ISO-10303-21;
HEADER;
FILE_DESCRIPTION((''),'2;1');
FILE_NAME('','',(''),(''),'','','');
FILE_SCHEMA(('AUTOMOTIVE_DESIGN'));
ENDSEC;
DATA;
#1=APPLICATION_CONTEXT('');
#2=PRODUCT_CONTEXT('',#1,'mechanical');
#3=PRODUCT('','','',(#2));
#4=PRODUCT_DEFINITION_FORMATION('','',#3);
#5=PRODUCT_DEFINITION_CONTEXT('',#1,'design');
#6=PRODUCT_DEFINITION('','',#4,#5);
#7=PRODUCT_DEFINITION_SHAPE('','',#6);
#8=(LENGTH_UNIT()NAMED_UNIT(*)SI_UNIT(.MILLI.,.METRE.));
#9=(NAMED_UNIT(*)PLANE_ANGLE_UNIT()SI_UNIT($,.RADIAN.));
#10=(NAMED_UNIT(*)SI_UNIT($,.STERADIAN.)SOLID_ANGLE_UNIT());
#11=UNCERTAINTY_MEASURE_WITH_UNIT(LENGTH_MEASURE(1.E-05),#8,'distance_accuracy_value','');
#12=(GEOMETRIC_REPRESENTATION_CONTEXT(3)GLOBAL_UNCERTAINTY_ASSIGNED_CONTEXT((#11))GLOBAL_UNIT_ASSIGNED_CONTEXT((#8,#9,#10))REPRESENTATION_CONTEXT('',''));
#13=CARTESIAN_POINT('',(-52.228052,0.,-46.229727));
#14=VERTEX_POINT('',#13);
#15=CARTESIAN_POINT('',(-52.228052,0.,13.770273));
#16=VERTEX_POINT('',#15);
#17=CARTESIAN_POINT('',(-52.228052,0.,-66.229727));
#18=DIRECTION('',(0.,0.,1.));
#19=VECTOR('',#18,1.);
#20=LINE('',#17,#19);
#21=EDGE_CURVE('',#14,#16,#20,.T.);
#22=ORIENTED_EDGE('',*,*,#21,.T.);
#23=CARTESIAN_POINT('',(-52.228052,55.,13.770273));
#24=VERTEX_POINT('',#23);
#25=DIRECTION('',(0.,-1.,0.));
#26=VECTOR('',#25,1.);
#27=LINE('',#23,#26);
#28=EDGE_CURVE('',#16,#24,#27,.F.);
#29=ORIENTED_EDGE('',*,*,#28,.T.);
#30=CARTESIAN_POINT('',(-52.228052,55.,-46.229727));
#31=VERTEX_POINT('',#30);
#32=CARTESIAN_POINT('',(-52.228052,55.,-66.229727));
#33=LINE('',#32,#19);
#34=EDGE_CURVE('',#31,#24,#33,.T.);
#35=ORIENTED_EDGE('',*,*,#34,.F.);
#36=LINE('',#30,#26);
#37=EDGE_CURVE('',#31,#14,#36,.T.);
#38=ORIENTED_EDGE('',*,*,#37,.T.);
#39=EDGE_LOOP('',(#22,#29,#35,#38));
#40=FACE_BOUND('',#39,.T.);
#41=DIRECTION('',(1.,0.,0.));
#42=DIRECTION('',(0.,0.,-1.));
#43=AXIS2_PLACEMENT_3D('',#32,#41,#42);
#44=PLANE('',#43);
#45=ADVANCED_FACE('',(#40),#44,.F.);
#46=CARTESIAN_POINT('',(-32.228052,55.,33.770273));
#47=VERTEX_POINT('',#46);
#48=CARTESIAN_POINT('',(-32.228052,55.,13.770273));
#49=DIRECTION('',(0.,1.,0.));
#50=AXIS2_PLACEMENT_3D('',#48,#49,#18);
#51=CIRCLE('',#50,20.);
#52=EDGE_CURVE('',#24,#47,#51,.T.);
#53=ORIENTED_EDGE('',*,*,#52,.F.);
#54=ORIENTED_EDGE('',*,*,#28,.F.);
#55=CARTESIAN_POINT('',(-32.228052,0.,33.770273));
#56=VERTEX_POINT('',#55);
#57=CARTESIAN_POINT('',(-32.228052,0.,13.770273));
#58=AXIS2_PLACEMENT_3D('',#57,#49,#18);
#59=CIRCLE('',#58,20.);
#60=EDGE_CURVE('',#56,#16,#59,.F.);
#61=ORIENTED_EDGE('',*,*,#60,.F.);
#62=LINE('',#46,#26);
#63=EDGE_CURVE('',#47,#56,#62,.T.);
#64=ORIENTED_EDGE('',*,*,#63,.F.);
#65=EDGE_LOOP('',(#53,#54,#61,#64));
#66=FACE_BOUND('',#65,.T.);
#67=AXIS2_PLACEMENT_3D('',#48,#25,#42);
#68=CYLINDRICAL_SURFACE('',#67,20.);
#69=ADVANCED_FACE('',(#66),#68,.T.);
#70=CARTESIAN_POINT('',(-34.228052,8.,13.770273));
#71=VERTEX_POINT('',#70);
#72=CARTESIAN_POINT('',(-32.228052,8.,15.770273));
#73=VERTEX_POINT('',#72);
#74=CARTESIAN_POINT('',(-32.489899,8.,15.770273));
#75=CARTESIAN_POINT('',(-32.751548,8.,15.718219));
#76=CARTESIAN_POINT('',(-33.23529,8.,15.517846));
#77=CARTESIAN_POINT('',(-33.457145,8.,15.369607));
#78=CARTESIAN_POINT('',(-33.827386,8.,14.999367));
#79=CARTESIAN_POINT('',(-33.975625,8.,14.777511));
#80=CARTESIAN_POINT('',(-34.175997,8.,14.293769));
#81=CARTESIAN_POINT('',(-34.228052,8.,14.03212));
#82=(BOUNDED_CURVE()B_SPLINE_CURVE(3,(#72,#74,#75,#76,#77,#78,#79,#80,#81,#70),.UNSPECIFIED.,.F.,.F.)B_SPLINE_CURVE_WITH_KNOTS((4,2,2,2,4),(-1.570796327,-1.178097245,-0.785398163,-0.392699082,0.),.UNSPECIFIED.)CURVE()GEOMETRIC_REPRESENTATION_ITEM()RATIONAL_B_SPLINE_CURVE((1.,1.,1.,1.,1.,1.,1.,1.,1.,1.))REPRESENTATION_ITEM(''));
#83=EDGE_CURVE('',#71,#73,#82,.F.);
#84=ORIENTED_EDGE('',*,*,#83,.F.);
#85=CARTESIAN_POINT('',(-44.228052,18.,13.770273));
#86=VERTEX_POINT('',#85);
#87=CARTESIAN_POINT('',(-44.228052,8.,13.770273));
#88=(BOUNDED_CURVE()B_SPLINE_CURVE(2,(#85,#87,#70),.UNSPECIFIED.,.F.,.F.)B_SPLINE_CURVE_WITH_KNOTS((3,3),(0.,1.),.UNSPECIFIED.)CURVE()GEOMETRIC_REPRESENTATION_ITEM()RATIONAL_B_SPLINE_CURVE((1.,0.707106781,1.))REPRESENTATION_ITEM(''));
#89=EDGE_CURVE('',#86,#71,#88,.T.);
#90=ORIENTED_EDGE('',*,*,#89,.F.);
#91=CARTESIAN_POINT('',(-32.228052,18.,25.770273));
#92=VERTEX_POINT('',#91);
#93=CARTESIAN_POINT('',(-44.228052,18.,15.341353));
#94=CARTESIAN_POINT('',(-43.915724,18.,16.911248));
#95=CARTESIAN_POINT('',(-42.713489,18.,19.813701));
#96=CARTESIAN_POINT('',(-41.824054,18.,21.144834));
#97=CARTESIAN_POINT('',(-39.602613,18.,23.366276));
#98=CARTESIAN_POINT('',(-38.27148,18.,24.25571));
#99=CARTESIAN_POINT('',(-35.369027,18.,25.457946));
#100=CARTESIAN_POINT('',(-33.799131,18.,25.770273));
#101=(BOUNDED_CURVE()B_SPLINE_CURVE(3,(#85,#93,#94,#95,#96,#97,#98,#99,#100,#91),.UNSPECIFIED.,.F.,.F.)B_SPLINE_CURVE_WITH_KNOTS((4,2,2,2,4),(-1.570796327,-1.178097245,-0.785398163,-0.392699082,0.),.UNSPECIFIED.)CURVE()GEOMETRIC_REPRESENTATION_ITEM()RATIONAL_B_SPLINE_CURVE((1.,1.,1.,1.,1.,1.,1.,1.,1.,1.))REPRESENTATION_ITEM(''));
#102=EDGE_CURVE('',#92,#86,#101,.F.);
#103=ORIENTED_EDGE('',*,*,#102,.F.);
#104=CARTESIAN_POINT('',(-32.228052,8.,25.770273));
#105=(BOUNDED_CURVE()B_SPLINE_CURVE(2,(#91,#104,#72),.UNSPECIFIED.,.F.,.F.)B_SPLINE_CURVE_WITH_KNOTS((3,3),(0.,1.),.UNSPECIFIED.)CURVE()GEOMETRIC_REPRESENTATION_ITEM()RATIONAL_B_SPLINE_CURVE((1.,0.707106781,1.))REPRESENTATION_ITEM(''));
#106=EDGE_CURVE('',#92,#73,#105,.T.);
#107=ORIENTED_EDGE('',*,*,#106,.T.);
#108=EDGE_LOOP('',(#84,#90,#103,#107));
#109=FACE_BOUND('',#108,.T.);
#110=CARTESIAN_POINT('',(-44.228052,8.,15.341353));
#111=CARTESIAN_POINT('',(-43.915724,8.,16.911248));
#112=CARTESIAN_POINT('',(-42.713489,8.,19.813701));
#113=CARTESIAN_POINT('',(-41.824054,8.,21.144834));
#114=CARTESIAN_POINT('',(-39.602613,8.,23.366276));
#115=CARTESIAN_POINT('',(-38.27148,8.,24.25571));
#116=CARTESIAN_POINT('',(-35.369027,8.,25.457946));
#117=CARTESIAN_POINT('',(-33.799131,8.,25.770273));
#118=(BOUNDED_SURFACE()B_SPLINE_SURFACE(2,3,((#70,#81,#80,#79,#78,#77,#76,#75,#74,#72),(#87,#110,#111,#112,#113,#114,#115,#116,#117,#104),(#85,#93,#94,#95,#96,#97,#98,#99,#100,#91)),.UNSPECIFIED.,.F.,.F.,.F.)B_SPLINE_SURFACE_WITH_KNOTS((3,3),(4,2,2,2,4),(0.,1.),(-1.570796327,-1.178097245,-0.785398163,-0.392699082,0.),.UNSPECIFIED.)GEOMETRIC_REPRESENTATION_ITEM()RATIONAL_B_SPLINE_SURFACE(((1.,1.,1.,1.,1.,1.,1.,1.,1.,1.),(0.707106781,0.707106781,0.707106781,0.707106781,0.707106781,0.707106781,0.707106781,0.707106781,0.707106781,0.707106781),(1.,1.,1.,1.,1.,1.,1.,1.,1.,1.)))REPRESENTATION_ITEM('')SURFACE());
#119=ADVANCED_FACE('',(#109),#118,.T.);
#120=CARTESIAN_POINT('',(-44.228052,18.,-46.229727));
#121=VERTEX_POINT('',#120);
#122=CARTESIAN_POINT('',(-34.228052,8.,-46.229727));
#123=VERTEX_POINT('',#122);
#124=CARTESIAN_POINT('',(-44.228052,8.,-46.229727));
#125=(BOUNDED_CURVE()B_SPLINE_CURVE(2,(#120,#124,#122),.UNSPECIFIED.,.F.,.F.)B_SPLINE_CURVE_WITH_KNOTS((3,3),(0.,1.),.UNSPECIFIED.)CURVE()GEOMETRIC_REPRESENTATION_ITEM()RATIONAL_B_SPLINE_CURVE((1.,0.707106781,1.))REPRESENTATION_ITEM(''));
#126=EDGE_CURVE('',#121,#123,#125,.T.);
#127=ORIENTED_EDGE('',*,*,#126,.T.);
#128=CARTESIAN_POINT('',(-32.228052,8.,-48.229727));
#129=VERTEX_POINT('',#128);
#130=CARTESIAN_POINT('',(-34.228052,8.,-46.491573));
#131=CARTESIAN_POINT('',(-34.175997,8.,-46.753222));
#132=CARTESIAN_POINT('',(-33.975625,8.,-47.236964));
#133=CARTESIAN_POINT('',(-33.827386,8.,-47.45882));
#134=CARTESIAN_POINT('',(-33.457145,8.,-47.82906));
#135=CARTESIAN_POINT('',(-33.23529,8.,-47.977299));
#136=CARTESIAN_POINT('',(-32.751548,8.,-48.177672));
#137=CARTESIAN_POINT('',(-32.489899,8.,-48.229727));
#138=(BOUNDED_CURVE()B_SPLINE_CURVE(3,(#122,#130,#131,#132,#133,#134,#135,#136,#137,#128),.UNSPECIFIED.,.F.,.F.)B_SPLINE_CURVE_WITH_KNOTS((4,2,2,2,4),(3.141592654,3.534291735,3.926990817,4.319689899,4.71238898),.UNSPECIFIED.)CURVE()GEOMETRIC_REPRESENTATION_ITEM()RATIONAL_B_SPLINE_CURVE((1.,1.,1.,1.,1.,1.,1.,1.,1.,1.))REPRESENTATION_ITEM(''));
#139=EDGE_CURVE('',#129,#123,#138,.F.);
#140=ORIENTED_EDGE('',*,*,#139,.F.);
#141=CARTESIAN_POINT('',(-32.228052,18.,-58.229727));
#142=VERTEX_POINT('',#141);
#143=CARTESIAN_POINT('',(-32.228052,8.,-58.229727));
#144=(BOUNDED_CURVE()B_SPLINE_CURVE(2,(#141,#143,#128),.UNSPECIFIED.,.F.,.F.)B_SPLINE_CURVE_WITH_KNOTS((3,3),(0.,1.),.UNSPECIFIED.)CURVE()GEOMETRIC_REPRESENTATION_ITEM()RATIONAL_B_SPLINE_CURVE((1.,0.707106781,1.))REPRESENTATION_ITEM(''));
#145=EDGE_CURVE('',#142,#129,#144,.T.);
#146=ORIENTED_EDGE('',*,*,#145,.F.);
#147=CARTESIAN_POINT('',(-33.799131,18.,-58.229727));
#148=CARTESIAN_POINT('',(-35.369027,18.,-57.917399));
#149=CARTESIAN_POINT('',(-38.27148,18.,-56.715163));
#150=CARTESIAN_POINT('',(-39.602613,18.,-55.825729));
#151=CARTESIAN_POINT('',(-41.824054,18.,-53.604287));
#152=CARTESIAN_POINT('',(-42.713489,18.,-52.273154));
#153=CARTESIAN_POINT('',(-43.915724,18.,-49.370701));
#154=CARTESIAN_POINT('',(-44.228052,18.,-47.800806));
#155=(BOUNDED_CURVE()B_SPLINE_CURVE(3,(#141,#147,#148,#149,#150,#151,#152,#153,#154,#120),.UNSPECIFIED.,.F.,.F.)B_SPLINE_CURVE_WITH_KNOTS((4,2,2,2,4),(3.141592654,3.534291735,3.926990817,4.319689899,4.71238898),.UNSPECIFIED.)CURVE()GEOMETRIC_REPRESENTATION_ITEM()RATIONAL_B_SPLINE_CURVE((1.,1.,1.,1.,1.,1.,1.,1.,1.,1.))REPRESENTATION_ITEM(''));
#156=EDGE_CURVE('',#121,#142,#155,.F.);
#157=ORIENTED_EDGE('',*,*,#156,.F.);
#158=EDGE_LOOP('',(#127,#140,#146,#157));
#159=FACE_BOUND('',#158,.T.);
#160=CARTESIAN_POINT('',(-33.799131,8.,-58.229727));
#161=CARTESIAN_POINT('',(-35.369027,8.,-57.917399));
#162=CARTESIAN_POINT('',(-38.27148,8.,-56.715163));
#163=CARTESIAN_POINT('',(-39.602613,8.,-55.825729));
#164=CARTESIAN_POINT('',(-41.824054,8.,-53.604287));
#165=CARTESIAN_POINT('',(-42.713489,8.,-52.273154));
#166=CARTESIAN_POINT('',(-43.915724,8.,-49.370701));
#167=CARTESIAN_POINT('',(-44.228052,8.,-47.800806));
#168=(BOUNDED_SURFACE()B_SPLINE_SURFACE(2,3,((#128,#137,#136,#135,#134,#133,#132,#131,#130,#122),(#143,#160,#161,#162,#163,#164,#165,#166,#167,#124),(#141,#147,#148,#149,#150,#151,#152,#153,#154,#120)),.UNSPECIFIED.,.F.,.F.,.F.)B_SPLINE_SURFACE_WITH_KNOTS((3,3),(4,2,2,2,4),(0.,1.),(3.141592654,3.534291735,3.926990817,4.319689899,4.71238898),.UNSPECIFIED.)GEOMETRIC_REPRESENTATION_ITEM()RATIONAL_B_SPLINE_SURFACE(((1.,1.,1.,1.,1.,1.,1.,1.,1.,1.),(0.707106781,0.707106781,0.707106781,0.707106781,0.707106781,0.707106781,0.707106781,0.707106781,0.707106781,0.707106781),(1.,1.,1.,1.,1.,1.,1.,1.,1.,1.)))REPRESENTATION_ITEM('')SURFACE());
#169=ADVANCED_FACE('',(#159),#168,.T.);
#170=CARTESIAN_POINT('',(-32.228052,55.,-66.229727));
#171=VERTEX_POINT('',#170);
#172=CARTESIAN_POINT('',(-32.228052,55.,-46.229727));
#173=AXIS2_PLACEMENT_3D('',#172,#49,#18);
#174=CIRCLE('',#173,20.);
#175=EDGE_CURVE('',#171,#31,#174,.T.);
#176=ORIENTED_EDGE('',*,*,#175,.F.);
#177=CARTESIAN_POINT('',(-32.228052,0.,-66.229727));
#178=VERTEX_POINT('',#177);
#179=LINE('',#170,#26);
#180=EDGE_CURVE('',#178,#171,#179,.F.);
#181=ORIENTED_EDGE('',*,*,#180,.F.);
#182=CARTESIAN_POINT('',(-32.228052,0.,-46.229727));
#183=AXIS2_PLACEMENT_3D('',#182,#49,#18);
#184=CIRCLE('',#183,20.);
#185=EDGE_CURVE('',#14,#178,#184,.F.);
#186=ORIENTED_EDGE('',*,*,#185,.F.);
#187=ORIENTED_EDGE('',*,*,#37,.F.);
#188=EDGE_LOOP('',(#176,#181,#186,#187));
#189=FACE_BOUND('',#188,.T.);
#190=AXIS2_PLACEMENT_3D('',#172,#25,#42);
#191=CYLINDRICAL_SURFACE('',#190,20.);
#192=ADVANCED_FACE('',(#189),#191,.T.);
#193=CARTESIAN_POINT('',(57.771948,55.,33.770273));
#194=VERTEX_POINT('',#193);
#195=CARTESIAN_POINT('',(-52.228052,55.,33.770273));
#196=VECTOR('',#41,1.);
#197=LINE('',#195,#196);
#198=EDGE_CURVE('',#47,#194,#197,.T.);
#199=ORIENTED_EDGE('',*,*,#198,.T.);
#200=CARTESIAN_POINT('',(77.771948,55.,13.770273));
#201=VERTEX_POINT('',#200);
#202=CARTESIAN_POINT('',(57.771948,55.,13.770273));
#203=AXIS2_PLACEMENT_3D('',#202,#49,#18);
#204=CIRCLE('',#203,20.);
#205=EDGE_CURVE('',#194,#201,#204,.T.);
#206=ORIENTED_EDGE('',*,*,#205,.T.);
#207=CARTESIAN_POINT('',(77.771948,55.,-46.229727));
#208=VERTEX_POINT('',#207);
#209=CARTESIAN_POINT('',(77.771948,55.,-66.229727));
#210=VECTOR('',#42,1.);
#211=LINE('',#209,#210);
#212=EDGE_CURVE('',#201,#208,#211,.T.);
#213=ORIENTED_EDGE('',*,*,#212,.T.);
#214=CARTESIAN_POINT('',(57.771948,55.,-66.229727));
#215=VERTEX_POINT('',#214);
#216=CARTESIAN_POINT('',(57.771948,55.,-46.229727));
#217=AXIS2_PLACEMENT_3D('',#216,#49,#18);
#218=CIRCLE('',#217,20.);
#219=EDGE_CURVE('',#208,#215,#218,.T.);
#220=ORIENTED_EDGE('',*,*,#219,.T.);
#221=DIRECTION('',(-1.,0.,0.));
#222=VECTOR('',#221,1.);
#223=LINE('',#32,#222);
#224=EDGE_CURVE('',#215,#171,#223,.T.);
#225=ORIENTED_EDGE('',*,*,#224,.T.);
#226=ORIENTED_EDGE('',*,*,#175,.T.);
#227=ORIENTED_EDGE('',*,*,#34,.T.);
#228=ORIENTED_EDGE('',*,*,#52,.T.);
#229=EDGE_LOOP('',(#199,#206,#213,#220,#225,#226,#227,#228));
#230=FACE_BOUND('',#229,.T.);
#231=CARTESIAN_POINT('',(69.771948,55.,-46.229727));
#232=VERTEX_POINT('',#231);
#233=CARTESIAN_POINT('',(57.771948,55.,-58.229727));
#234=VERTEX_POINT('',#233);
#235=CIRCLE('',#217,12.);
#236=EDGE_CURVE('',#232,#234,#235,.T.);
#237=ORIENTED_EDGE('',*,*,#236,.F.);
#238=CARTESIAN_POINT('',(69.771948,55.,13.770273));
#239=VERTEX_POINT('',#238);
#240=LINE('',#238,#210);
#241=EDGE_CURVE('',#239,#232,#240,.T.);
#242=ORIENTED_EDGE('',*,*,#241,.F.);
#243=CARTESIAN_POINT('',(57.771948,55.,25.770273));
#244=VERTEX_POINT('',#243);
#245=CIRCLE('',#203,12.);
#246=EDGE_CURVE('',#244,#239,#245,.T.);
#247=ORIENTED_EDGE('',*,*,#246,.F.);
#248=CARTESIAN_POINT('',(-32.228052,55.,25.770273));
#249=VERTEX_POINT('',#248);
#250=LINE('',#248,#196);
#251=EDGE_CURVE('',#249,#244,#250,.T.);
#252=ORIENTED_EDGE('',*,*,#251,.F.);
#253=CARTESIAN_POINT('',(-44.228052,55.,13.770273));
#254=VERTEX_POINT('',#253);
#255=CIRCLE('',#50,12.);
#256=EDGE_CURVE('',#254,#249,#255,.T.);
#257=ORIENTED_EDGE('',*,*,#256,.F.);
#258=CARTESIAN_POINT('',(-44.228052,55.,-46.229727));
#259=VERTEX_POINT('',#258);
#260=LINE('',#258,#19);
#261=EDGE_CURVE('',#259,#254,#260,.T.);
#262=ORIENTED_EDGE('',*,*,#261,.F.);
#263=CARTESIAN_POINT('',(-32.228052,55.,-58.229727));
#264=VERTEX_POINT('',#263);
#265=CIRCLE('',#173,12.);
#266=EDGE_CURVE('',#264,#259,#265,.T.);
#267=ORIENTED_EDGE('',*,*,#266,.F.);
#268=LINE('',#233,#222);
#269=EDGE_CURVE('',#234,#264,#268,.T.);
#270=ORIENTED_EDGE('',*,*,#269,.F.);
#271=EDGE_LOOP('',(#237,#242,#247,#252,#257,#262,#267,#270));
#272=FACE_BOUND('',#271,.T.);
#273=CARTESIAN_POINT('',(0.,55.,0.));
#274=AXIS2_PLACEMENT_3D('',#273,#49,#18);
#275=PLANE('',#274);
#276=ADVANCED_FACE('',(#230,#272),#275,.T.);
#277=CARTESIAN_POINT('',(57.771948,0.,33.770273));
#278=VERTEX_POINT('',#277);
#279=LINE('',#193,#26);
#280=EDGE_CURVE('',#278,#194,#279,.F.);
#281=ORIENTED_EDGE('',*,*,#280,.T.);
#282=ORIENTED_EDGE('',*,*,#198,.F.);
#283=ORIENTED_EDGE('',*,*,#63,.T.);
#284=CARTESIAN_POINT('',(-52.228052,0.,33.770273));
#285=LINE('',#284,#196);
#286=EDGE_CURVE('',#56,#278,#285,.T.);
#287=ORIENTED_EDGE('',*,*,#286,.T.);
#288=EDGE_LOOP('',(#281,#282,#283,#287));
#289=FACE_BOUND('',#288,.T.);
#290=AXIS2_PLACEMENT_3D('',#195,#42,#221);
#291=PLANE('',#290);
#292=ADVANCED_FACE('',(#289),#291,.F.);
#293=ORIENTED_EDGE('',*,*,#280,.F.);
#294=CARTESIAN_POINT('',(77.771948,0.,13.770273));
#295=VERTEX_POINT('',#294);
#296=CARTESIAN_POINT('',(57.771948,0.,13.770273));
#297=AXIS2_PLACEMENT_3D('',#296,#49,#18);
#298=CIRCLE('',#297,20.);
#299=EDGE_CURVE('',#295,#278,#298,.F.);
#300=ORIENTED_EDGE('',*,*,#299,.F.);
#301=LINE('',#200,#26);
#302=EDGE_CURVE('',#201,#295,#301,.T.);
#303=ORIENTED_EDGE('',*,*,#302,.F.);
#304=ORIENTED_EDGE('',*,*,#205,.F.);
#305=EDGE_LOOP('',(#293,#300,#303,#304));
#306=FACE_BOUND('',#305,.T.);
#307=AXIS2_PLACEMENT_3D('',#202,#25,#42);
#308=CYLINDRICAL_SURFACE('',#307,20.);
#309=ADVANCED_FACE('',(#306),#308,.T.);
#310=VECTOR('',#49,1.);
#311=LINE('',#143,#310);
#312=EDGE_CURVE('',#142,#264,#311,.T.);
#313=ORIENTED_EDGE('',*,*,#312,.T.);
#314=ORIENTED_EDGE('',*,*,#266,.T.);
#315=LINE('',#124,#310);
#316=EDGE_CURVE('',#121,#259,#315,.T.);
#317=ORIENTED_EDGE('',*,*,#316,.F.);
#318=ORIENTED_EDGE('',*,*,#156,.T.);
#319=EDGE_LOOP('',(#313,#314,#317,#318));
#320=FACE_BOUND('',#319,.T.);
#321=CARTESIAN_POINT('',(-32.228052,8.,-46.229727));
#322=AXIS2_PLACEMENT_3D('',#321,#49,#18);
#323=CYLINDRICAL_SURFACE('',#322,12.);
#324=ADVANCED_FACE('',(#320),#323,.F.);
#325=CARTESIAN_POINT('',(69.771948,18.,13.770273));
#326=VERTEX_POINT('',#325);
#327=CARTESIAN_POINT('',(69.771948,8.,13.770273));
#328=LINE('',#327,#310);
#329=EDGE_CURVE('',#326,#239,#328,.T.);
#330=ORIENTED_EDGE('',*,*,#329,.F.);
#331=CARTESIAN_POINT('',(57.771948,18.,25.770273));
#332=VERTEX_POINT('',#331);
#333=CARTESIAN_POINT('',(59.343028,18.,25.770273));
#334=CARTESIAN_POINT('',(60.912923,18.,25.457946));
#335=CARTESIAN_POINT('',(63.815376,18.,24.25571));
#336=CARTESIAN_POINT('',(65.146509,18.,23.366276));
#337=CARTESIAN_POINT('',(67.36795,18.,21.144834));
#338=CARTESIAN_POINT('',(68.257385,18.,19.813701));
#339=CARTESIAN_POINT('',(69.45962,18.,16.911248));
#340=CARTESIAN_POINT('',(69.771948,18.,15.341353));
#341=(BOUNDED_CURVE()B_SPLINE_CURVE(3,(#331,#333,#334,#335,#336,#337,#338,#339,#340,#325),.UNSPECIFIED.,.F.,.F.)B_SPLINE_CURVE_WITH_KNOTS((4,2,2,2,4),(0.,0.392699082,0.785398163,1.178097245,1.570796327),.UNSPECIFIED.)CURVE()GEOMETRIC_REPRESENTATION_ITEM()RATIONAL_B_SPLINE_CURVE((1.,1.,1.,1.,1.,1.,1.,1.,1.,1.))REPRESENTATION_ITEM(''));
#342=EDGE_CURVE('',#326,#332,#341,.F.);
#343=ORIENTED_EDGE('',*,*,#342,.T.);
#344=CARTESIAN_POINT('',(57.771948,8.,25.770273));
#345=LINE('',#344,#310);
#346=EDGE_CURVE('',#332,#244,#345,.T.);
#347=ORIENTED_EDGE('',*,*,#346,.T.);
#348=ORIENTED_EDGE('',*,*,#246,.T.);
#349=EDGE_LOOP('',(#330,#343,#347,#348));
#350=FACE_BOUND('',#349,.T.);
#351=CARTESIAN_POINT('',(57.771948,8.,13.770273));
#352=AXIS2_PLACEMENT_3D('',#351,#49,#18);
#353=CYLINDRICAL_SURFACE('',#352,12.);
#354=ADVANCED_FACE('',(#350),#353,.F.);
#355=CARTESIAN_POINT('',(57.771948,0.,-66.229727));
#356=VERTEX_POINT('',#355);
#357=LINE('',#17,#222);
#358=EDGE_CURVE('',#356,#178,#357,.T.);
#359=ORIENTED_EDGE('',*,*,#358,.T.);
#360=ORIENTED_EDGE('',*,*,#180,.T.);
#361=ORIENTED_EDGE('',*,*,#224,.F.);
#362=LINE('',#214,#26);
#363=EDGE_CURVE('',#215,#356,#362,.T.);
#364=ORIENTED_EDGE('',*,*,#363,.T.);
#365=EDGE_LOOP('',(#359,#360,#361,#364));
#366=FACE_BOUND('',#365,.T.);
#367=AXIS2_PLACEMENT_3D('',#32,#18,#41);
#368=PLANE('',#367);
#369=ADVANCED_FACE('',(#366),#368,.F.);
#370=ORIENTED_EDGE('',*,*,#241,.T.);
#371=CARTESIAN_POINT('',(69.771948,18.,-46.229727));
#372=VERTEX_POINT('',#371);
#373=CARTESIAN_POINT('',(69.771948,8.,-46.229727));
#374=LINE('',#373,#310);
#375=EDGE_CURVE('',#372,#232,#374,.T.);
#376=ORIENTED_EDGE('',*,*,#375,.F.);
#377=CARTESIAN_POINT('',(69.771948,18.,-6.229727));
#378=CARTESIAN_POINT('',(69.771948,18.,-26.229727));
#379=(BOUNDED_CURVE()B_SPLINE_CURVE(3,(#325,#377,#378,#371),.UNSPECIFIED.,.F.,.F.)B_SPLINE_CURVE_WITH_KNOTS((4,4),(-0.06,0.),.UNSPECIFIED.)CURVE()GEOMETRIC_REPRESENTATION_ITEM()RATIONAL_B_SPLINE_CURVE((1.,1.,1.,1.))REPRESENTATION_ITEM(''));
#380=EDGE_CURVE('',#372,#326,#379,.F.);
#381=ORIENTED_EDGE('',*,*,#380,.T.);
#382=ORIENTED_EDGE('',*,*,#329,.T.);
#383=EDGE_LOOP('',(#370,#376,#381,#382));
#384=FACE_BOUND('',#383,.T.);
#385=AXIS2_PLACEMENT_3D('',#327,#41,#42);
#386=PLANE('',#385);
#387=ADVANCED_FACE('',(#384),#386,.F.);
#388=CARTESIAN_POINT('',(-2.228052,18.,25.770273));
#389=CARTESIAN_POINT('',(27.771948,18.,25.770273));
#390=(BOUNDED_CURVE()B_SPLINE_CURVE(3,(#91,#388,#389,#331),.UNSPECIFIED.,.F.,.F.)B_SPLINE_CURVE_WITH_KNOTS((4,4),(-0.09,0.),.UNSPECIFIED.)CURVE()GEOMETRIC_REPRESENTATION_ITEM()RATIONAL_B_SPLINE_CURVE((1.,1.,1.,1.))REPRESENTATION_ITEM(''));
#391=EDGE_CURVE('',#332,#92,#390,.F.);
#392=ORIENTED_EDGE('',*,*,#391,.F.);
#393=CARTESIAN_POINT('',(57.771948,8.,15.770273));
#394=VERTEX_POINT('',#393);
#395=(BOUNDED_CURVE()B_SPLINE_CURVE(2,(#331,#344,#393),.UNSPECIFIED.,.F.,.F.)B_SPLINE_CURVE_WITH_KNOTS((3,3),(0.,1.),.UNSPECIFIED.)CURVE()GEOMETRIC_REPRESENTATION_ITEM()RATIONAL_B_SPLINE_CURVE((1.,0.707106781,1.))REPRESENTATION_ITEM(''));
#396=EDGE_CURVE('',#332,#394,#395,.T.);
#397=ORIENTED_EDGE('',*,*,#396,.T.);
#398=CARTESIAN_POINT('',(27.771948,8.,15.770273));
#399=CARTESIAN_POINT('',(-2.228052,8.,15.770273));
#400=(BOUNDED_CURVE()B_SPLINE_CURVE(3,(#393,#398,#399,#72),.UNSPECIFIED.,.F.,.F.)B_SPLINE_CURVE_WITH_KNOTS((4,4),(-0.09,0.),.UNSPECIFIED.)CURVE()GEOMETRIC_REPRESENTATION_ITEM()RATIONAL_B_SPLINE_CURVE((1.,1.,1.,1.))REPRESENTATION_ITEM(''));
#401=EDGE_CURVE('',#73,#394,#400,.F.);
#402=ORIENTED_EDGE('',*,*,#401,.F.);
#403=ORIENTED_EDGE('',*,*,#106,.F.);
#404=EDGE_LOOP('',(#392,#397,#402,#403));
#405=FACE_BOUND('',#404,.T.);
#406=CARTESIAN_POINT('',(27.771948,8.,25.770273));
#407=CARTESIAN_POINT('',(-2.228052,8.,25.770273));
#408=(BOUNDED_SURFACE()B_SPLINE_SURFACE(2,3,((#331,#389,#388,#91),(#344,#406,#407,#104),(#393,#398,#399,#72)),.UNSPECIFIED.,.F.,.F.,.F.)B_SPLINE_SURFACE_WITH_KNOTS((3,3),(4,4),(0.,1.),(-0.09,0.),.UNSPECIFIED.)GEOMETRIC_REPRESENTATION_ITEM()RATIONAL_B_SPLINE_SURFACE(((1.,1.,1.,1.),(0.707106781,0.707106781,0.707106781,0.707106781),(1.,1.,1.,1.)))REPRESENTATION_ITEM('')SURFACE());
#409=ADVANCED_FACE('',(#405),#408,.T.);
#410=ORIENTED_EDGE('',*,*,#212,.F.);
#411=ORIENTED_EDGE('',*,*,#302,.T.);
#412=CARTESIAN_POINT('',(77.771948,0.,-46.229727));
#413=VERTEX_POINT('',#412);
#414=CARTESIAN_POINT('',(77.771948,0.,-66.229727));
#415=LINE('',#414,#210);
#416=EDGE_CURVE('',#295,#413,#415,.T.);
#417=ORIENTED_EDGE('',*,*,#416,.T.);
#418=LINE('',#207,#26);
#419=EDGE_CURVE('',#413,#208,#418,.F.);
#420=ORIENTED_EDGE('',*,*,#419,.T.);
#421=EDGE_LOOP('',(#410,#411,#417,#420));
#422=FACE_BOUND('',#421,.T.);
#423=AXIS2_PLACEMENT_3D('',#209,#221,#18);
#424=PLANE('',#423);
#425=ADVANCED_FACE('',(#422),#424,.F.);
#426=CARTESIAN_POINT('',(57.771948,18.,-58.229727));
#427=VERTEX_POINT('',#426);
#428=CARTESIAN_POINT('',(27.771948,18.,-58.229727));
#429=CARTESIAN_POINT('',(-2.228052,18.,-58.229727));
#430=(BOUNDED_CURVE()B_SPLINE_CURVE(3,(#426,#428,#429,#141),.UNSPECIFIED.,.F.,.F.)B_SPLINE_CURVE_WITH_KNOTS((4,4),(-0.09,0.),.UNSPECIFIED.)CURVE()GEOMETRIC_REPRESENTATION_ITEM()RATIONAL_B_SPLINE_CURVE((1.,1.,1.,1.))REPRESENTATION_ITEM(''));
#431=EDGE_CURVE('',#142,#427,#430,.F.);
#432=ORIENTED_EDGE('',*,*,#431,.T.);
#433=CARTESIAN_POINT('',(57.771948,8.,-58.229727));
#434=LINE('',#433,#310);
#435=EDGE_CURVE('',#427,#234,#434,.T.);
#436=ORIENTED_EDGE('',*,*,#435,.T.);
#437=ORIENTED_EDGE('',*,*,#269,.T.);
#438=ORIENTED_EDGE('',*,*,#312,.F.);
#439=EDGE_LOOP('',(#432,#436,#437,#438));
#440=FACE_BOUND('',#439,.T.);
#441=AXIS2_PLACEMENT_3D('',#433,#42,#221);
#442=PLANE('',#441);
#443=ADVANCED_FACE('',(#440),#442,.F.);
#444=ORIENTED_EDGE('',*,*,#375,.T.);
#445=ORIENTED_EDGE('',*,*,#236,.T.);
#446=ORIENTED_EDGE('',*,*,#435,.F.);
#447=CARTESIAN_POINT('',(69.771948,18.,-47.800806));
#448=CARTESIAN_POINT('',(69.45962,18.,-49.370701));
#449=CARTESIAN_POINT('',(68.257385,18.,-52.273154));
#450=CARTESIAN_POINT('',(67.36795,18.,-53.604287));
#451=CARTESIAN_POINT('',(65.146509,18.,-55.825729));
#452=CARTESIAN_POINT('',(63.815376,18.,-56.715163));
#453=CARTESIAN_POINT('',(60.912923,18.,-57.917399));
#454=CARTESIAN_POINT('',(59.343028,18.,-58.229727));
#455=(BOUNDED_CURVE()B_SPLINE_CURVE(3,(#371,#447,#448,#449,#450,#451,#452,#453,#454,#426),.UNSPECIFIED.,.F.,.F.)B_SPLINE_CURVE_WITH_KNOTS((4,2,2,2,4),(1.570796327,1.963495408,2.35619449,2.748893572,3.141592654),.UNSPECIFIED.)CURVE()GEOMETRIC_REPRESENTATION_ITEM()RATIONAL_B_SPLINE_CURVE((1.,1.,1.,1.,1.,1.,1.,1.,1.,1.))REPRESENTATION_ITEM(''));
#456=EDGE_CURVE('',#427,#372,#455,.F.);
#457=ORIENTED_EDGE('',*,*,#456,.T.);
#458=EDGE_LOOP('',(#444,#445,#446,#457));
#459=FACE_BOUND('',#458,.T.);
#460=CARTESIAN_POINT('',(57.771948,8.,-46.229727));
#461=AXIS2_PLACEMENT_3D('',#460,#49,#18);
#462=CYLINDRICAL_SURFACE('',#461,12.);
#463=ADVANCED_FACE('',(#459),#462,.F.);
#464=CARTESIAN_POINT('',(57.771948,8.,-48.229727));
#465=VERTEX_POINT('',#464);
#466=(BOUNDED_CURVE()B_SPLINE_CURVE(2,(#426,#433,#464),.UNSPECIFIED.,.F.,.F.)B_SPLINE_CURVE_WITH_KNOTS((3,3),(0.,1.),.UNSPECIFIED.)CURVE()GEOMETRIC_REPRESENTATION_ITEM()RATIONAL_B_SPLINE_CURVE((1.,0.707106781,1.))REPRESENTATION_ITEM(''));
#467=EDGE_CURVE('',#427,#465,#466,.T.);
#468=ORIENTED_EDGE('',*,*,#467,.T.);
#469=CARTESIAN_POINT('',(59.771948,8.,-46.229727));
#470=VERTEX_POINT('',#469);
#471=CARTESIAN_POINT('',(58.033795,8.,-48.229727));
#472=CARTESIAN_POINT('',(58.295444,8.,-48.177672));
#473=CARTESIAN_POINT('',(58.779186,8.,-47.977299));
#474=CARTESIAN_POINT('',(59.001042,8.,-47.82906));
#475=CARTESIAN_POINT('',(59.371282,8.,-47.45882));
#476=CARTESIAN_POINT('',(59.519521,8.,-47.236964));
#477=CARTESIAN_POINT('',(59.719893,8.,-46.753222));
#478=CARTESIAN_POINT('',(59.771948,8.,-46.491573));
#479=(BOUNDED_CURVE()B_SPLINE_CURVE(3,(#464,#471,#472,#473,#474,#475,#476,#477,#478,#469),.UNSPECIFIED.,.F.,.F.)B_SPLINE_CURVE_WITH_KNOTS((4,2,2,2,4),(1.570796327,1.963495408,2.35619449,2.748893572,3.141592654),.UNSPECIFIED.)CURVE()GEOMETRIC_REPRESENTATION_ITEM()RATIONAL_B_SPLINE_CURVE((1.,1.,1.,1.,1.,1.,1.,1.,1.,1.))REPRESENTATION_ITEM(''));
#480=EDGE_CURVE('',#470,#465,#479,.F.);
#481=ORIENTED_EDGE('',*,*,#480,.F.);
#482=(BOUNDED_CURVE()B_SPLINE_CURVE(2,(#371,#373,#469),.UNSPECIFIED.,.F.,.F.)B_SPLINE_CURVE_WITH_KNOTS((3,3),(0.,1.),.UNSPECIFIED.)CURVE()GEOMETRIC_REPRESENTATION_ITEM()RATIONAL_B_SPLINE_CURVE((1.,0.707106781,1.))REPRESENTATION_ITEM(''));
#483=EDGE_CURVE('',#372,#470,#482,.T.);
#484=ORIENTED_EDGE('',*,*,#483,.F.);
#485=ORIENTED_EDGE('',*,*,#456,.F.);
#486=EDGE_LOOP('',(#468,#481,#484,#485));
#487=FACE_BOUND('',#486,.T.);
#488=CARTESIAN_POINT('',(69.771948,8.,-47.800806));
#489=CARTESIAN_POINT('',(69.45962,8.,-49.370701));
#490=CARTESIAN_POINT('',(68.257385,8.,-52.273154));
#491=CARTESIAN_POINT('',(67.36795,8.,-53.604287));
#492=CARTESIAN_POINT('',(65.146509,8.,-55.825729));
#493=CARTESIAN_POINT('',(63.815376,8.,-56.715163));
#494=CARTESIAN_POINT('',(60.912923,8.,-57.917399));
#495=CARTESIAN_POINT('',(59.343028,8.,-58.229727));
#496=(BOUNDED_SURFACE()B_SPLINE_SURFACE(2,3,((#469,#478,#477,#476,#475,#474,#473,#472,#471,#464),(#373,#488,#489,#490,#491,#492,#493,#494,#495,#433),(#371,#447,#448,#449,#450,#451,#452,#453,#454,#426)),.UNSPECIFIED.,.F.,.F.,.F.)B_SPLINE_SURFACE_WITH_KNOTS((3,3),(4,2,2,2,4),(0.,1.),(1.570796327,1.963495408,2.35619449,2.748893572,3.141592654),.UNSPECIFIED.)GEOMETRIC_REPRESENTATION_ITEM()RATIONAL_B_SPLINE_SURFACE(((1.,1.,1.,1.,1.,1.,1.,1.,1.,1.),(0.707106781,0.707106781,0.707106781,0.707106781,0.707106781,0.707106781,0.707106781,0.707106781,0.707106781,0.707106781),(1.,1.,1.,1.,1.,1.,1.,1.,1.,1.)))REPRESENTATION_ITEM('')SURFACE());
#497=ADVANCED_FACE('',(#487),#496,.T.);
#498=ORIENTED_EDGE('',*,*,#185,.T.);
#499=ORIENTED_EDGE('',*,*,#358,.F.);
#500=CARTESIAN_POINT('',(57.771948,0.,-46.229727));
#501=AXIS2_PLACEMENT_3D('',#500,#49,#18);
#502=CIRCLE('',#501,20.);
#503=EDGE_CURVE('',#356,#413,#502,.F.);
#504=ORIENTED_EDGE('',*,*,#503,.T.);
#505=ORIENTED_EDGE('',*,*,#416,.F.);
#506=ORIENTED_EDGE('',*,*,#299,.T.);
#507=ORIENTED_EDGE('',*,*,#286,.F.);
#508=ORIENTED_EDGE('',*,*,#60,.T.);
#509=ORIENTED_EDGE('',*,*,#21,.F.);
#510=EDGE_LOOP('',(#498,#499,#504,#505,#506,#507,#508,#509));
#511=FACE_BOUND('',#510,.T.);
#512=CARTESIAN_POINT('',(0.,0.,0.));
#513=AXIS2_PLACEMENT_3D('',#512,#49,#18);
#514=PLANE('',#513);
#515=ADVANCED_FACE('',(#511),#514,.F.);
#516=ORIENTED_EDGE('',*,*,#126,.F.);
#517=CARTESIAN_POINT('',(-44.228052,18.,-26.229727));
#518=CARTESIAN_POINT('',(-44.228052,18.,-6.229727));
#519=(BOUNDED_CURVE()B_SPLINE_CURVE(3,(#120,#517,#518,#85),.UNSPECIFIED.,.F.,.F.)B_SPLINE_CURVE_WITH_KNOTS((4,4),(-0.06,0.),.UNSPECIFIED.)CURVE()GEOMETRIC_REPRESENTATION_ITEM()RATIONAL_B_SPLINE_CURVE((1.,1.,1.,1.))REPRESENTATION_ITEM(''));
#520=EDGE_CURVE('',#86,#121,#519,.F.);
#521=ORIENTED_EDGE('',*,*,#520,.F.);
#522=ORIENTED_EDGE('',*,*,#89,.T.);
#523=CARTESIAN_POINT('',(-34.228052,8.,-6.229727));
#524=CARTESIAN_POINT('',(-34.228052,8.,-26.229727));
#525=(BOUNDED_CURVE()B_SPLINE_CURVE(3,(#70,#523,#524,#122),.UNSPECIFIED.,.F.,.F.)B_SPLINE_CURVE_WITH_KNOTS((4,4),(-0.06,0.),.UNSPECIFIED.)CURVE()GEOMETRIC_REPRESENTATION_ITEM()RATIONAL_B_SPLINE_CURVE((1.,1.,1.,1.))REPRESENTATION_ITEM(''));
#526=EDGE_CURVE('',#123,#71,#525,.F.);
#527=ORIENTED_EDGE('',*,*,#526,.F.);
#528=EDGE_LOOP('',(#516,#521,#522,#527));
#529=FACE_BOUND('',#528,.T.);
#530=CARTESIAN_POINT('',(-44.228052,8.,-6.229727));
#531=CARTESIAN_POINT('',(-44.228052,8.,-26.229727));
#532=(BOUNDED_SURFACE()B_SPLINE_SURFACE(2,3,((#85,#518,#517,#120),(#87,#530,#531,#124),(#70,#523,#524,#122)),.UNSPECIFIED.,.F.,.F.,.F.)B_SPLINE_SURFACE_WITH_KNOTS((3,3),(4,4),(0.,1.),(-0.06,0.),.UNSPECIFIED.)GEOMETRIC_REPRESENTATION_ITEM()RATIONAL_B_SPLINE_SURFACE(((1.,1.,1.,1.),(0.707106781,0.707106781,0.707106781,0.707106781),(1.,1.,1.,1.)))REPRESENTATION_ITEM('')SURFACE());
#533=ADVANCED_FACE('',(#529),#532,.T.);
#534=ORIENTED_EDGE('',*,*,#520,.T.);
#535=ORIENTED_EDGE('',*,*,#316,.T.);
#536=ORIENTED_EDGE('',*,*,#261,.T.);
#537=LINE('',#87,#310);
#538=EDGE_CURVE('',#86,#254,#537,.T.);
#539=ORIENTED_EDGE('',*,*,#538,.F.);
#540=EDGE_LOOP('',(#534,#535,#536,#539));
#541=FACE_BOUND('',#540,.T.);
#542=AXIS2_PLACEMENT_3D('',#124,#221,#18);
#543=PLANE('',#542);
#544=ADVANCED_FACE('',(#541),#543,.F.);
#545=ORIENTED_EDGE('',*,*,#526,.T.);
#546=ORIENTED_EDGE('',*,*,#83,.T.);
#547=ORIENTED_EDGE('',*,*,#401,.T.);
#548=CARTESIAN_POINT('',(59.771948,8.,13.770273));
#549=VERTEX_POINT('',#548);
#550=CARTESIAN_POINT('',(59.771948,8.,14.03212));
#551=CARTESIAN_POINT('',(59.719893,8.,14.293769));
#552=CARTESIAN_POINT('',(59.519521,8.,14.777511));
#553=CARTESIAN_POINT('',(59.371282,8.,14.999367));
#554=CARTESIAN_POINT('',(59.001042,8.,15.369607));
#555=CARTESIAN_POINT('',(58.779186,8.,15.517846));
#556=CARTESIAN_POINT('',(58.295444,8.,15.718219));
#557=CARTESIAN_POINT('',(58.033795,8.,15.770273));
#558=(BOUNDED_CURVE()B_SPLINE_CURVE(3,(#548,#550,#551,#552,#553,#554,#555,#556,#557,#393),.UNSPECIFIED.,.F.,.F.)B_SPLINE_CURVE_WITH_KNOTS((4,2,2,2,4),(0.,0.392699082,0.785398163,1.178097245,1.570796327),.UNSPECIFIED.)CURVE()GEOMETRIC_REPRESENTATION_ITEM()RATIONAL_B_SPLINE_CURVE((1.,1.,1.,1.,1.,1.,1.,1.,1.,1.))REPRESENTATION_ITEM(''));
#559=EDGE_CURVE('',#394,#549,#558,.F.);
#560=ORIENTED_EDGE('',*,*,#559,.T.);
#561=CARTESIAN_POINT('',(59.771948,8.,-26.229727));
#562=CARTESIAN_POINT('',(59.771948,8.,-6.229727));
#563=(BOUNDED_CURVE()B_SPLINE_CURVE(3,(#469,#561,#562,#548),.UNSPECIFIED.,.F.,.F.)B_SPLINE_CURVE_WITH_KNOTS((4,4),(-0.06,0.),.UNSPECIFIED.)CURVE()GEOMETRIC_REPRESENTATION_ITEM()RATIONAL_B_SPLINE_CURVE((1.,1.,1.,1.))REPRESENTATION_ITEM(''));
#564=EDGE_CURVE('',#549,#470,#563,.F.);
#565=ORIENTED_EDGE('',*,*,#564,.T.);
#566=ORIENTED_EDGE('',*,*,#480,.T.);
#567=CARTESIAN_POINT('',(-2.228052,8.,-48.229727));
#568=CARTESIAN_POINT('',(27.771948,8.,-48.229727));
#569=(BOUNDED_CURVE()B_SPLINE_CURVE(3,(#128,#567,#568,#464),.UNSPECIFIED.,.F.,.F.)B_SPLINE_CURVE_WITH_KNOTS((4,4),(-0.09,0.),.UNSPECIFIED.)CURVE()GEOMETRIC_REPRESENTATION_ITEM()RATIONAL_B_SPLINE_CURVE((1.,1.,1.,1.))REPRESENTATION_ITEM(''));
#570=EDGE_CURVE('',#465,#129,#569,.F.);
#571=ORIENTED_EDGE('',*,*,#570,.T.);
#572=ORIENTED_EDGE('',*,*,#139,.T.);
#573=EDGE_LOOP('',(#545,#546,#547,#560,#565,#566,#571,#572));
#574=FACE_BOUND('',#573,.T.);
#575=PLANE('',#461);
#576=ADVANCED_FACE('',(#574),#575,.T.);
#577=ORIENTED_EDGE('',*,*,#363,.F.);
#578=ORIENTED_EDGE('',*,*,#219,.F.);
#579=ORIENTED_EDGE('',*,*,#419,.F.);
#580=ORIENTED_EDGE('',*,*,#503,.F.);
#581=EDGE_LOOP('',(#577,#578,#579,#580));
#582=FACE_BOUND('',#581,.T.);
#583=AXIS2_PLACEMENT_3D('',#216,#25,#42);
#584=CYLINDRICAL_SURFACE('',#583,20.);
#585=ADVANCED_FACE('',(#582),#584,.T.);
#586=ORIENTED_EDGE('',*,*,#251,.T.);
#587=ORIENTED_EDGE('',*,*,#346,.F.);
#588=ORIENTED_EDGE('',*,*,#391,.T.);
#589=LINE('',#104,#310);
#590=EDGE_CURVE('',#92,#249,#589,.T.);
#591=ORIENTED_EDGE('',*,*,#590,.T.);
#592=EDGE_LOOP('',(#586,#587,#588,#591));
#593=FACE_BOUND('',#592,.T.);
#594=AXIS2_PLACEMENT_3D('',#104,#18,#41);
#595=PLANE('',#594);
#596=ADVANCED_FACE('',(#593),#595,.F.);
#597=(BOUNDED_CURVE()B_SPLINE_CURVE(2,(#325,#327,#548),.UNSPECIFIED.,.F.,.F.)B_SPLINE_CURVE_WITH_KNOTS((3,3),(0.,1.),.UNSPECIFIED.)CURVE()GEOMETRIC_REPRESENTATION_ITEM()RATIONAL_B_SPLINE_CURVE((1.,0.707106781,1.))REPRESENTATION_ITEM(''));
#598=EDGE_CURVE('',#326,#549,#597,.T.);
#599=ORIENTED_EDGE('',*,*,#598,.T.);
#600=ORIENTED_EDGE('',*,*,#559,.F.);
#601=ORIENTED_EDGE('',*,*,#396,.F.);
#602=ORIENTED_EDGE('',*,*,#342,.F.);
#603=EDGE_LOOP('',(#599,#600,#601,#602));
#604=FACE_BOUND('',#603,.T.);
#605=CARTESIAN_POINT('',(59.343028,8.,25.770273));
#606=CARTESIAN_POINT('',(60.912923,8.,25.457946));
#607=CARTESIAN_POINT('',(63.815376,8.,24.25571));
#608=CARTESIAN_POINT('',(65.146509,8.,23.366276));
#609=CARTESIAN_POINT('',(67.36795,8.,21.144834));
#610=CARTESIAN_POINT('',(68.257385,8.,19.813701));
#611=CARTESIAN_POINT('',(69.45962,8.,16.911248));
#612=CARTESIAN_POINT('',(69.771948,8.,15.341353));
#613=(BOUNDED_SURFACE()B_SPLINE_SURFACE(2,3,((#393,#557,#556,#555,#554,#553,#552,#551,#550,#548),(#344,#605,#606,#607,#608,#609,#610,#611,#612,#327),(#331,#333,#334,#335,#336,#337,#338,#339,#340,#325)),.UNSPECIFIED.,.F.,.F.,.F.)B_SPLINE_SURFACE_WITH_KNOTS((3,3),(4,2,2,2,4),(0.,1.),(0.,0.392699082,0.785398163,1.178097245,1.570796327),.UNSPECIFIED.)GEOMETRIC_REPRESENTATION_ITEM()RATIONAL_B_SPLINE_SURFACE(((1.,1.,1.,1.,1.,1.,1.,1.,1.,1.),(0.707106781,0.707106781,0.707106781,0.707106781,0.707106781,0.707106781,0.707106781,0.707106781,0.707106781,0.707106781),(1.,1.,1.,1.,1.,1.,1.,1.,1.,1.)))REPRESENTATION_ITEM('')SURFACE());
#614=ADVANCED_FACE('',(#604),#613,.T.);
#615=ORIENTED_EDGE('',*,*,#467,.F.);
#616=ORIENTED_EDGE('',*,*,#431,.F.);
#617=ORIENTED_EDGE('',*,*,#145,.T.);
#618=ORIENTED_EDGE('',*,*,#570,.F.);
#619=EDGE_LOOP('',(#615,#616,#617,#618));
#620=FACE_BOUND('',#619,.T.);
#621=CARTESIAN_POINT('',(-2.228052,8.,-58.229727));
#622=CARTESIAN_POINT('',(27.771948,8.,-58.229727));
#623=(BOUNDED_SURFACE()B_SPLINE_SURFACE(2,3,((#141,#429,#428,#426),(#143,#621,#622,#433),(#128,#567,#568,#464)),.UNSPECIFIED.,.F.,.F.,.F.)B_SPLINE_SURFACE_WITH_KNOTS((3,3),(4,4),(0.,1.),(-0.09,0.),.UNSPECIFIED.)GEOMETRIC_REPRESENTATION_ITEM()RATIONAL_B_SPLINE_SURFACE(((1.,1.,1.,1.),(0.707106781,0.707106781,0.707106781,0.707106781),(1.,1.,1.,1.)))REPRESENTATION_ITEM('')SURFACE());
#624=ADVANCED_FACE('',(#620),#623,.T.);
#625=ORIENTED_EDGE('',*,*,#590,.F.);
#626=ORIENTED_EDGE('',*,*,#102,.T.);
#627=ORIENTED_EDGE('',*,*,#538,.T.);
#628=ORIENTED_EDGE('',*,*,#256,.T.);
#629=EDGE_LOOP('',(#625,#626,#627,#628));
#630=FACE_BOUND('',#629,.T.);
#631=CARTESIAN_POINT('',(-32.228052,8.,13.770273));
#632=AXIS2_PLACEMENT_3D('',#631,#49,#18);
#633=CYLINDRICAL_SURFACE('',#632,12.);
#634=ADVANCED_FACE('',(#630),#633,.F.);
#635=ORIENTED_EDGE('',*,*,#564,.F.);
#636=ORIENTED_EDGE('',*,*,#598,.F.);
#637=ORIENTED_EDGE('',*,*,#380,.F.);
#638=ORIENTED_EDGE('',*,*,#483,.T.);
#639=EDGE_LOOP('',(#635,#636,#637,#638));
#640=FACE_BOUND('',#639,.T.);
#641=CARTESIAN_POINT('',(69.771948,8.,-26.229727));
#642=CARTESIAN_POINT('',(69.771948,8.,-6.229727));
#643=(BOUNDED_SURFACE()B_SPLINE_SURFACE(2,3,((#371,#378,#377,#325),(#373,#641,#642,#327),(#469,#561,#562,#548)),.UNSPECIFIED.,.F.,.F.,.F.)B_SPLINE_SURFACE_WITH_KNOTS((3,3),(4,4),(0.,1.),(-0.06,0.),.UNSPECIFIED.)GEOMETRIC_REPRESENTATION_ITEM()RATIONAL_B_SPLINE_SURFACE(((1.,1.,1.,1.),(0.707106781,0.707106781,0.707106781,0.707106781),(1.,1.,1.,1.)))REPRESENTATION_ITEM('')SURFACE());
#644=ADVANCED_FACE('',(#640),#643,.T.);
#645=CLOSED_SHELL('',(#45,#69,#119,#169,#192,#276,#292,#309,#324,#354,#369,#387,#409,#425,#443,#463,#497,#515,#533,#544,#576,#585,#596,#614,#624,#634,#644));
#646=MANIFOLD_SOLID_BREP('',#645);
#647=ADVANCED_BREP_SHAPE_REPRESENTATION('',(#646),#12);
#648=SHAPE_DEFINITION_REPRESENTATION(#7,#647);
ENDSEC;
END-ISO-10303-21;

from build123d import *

# Parameters (mm, degrees)
ESQUISSE4_W             = 130
ESQUISSE4_H             = 100
BOSS_EXTRU_4_DEPTH      = 55
CONG_5_R                = 20
ENL_V_MAT_EXTRU_1_DEPTH = 47
CONG_6_SIZE             = 10


with BuildPart() as part:
    # Esquisse4 → Boss.-Extru.4 (new body)
    with BuildSketch(Plane(origin=(0, 0, 0), x_dir=(1, 0, 0), z_dir=(0, 1, 0))):
        with Locations((12.771948074, 16.229726537)):
            Rectangle(ESQUISSE4_W, ESQUISSE4_H)
    extrude(amount=BOSS_EXTRU_4_DEPTH)

    # Congé5
    cong_5_edges = [part.edges().sort_by_distance(p)[0] for p in [
        (-52.228051926, 27.5, -66.229726537),
        (77.771948074, 27.5, -66.229726537),
        (77.771948074, 27.5, 33.770273463),
        (-52.228051926, 27.5, 33.770273463),
    ]]
    fillet(cong_5_edges, radius=CONG_5_R)

    # Esquisse5 → Enlèv. mat.-Extru.1 (cut)
    with BuildSketch(Plane(origin=(0, 55, 0), x_dir=(1, 0, 0), z_dir=(0, 1, 0))):
        with BuildLine():
            Line((57.771948074, 58.229726537), (-32.228051926, 58.229726537))
            ThreePointArc((-32.228051926, 58.229726537), (-40.713333301, 54.715007912), (-44.228051926, 46.229726537))
            Line((-44.228051926, 46.229726537), (-44.228051926, -13.770273463))
            ThreePointArc((-44.228051926, -13.770273463), (-40.713333301, -22.255554837), (-32.228051926, -25.770273463))
            Line((-32.228051926, -25.770273463), (57.771948074, -25.770273463))
            ThreePointArc((57.771948074, -25.770273463), (66.257229448, -22.255554837), (69.771948074, -13.770273463))
            Line((69.771948074, -13.770273463), (69.771948074, 46.229726537))
            ThreePointArc((69.771948074, 46.229726537), (66.257229448, 54.715007912), (57.771948074, 58.229726537))
        make_face()
    extrude(amount=-ENL_V_MAT_EXTRU_1_DEPTH, mode=Mode.SUBTRACT)

    # Congé6
    # a fillet whose section is not a circle: 10 mm, written as the material it adds along each edge
    with BuildSketch(Plane(origin=(57.771948074, 8, -46.229726537), x_dir=(1, 0, 0), z_dir=(0, 0, 1))) as cong_6_piece_1:
        with BuildLine():
            Bezier((12, CONG_6_SIZE), (12, 0), (12 - CONG_6_SIZE, 0), weights=[1, 0.707106781, 1])
            Line((12 - CONG_6_SIZE, 0), (12, 0))
            Line((12, 0), (12, CONG_6_SIZE))
        make_face()
    revolve(axis=Axis((57.771948074, 8, -46.229726537), (0, 1, 0)), revolution_arc=90)
    with BuildSketch(Plane(origin=(69.771948074, 8, 13.770273463), x_dir=(0, 1, 0), z_dir=(0, 0, -1)), Plane(origin=(-44.228051926, 8, -46.229726537), x_dir=(0, 1, 0), z_dir=(0, 0, 1))) as cong_6_piece_2:
        with BuildLine():
            Bezier((CONG_6_SIZE, 0), (0, 0), (0, -CONG_6_SIZE), weights=[1, 0.707106781, 1])
            Line((0, -CONG_6_SIZE), (0, 0))
            Line((0, 0), (CONG_6_SIZE, 0))
        make_face()
    extrude(amount=60)
    with BuildSketch(Plane(origin=(57.771948074, 8, 13.770273463), x_dir=(0, 0, 1), z_dir=(-1, 0, 0))) as cong_6_piece_3:
        with BuildLine():
            Bezier((12, CONG_6_SIZE), (12, 0), (12 - CONG_6_SIZE, 0), weights=[1, 0.707106781, 1])
            Line((12 - CONG_6_SIZE, 0), (12, 0))
            Line((12, 0), (12, CONG_6_SIZE))
        make_face()
    revolve(axis=Axis((57.771948074, 8, 13.770273463), (0, 1, 0)), revolution_arc=90)
    with BuildSketch(Plane(origin=(-32.228051926, 8, 25.770273463), x_dir=(0, 1, 0), z_dir=(1, 0, 0)), Plane(origin=(57.771948074, 8, -58.229726537), x_dir=(0, 1, 0), z_dir=(-1, 0, 0))) as cong_6_piece_4:
        with BuildLine():
            Bezier((CONG_6_SIZE, 0), (0, 0), (0, -CONG_6_SIZE), weights=[1, 0.707106781, 1])
            Line((0, -CONG_6_SIZE), (0, 0))
            Line((0, 0), (CONG_6_SIZE, 0))
        make_face()
    extrude(amount=90)
    with BuildSketch(Plane(origin=(-32.228051926, 8, 13.770273463), x_dir=(-1, 0, 0), z_dir=(0, 0, -1))) as cong_6_piece_5:
        with BuildLine():
            Bezier((12, CONG_6_SIZE), (12, 0), (12 - CONG_6_SIZE, 0), weights=[1, 0.707106781, 1])
            Line((12 - CONG_6_SIZE, 0), (12, 0))
            Line((12, 0), (12, CONG_6_SIZE))
        make_face()
    revolve(axis=Axis((-32.228051926, 8, 13.770273463), (0, 1, 0)), revolution_arc=90)
    with BuildSketch(Plane(origin=(-32.228051926, 8, -46.229726537), x_dir=(0, 0, -1), z_dir=(1, 0, 0))) as cong_6_piece_6:
        with BuildLine():
            Bezier((12, CONG_6_SIZE), (12, 0), (12 - CONG_6_SIZE, 0), weights=[1, 0.707106781, 1])
            Line((12 - CONG_6_SIZE, 0), (12, 0))
            Line((12, 0), (12, CONG_6_SIZE))
        make_face()
    revolve(axis=Axis((-32.228051926, 8, -46.229726537), (0, 1, 0)), revolution_arc=90)


solid = part.part
